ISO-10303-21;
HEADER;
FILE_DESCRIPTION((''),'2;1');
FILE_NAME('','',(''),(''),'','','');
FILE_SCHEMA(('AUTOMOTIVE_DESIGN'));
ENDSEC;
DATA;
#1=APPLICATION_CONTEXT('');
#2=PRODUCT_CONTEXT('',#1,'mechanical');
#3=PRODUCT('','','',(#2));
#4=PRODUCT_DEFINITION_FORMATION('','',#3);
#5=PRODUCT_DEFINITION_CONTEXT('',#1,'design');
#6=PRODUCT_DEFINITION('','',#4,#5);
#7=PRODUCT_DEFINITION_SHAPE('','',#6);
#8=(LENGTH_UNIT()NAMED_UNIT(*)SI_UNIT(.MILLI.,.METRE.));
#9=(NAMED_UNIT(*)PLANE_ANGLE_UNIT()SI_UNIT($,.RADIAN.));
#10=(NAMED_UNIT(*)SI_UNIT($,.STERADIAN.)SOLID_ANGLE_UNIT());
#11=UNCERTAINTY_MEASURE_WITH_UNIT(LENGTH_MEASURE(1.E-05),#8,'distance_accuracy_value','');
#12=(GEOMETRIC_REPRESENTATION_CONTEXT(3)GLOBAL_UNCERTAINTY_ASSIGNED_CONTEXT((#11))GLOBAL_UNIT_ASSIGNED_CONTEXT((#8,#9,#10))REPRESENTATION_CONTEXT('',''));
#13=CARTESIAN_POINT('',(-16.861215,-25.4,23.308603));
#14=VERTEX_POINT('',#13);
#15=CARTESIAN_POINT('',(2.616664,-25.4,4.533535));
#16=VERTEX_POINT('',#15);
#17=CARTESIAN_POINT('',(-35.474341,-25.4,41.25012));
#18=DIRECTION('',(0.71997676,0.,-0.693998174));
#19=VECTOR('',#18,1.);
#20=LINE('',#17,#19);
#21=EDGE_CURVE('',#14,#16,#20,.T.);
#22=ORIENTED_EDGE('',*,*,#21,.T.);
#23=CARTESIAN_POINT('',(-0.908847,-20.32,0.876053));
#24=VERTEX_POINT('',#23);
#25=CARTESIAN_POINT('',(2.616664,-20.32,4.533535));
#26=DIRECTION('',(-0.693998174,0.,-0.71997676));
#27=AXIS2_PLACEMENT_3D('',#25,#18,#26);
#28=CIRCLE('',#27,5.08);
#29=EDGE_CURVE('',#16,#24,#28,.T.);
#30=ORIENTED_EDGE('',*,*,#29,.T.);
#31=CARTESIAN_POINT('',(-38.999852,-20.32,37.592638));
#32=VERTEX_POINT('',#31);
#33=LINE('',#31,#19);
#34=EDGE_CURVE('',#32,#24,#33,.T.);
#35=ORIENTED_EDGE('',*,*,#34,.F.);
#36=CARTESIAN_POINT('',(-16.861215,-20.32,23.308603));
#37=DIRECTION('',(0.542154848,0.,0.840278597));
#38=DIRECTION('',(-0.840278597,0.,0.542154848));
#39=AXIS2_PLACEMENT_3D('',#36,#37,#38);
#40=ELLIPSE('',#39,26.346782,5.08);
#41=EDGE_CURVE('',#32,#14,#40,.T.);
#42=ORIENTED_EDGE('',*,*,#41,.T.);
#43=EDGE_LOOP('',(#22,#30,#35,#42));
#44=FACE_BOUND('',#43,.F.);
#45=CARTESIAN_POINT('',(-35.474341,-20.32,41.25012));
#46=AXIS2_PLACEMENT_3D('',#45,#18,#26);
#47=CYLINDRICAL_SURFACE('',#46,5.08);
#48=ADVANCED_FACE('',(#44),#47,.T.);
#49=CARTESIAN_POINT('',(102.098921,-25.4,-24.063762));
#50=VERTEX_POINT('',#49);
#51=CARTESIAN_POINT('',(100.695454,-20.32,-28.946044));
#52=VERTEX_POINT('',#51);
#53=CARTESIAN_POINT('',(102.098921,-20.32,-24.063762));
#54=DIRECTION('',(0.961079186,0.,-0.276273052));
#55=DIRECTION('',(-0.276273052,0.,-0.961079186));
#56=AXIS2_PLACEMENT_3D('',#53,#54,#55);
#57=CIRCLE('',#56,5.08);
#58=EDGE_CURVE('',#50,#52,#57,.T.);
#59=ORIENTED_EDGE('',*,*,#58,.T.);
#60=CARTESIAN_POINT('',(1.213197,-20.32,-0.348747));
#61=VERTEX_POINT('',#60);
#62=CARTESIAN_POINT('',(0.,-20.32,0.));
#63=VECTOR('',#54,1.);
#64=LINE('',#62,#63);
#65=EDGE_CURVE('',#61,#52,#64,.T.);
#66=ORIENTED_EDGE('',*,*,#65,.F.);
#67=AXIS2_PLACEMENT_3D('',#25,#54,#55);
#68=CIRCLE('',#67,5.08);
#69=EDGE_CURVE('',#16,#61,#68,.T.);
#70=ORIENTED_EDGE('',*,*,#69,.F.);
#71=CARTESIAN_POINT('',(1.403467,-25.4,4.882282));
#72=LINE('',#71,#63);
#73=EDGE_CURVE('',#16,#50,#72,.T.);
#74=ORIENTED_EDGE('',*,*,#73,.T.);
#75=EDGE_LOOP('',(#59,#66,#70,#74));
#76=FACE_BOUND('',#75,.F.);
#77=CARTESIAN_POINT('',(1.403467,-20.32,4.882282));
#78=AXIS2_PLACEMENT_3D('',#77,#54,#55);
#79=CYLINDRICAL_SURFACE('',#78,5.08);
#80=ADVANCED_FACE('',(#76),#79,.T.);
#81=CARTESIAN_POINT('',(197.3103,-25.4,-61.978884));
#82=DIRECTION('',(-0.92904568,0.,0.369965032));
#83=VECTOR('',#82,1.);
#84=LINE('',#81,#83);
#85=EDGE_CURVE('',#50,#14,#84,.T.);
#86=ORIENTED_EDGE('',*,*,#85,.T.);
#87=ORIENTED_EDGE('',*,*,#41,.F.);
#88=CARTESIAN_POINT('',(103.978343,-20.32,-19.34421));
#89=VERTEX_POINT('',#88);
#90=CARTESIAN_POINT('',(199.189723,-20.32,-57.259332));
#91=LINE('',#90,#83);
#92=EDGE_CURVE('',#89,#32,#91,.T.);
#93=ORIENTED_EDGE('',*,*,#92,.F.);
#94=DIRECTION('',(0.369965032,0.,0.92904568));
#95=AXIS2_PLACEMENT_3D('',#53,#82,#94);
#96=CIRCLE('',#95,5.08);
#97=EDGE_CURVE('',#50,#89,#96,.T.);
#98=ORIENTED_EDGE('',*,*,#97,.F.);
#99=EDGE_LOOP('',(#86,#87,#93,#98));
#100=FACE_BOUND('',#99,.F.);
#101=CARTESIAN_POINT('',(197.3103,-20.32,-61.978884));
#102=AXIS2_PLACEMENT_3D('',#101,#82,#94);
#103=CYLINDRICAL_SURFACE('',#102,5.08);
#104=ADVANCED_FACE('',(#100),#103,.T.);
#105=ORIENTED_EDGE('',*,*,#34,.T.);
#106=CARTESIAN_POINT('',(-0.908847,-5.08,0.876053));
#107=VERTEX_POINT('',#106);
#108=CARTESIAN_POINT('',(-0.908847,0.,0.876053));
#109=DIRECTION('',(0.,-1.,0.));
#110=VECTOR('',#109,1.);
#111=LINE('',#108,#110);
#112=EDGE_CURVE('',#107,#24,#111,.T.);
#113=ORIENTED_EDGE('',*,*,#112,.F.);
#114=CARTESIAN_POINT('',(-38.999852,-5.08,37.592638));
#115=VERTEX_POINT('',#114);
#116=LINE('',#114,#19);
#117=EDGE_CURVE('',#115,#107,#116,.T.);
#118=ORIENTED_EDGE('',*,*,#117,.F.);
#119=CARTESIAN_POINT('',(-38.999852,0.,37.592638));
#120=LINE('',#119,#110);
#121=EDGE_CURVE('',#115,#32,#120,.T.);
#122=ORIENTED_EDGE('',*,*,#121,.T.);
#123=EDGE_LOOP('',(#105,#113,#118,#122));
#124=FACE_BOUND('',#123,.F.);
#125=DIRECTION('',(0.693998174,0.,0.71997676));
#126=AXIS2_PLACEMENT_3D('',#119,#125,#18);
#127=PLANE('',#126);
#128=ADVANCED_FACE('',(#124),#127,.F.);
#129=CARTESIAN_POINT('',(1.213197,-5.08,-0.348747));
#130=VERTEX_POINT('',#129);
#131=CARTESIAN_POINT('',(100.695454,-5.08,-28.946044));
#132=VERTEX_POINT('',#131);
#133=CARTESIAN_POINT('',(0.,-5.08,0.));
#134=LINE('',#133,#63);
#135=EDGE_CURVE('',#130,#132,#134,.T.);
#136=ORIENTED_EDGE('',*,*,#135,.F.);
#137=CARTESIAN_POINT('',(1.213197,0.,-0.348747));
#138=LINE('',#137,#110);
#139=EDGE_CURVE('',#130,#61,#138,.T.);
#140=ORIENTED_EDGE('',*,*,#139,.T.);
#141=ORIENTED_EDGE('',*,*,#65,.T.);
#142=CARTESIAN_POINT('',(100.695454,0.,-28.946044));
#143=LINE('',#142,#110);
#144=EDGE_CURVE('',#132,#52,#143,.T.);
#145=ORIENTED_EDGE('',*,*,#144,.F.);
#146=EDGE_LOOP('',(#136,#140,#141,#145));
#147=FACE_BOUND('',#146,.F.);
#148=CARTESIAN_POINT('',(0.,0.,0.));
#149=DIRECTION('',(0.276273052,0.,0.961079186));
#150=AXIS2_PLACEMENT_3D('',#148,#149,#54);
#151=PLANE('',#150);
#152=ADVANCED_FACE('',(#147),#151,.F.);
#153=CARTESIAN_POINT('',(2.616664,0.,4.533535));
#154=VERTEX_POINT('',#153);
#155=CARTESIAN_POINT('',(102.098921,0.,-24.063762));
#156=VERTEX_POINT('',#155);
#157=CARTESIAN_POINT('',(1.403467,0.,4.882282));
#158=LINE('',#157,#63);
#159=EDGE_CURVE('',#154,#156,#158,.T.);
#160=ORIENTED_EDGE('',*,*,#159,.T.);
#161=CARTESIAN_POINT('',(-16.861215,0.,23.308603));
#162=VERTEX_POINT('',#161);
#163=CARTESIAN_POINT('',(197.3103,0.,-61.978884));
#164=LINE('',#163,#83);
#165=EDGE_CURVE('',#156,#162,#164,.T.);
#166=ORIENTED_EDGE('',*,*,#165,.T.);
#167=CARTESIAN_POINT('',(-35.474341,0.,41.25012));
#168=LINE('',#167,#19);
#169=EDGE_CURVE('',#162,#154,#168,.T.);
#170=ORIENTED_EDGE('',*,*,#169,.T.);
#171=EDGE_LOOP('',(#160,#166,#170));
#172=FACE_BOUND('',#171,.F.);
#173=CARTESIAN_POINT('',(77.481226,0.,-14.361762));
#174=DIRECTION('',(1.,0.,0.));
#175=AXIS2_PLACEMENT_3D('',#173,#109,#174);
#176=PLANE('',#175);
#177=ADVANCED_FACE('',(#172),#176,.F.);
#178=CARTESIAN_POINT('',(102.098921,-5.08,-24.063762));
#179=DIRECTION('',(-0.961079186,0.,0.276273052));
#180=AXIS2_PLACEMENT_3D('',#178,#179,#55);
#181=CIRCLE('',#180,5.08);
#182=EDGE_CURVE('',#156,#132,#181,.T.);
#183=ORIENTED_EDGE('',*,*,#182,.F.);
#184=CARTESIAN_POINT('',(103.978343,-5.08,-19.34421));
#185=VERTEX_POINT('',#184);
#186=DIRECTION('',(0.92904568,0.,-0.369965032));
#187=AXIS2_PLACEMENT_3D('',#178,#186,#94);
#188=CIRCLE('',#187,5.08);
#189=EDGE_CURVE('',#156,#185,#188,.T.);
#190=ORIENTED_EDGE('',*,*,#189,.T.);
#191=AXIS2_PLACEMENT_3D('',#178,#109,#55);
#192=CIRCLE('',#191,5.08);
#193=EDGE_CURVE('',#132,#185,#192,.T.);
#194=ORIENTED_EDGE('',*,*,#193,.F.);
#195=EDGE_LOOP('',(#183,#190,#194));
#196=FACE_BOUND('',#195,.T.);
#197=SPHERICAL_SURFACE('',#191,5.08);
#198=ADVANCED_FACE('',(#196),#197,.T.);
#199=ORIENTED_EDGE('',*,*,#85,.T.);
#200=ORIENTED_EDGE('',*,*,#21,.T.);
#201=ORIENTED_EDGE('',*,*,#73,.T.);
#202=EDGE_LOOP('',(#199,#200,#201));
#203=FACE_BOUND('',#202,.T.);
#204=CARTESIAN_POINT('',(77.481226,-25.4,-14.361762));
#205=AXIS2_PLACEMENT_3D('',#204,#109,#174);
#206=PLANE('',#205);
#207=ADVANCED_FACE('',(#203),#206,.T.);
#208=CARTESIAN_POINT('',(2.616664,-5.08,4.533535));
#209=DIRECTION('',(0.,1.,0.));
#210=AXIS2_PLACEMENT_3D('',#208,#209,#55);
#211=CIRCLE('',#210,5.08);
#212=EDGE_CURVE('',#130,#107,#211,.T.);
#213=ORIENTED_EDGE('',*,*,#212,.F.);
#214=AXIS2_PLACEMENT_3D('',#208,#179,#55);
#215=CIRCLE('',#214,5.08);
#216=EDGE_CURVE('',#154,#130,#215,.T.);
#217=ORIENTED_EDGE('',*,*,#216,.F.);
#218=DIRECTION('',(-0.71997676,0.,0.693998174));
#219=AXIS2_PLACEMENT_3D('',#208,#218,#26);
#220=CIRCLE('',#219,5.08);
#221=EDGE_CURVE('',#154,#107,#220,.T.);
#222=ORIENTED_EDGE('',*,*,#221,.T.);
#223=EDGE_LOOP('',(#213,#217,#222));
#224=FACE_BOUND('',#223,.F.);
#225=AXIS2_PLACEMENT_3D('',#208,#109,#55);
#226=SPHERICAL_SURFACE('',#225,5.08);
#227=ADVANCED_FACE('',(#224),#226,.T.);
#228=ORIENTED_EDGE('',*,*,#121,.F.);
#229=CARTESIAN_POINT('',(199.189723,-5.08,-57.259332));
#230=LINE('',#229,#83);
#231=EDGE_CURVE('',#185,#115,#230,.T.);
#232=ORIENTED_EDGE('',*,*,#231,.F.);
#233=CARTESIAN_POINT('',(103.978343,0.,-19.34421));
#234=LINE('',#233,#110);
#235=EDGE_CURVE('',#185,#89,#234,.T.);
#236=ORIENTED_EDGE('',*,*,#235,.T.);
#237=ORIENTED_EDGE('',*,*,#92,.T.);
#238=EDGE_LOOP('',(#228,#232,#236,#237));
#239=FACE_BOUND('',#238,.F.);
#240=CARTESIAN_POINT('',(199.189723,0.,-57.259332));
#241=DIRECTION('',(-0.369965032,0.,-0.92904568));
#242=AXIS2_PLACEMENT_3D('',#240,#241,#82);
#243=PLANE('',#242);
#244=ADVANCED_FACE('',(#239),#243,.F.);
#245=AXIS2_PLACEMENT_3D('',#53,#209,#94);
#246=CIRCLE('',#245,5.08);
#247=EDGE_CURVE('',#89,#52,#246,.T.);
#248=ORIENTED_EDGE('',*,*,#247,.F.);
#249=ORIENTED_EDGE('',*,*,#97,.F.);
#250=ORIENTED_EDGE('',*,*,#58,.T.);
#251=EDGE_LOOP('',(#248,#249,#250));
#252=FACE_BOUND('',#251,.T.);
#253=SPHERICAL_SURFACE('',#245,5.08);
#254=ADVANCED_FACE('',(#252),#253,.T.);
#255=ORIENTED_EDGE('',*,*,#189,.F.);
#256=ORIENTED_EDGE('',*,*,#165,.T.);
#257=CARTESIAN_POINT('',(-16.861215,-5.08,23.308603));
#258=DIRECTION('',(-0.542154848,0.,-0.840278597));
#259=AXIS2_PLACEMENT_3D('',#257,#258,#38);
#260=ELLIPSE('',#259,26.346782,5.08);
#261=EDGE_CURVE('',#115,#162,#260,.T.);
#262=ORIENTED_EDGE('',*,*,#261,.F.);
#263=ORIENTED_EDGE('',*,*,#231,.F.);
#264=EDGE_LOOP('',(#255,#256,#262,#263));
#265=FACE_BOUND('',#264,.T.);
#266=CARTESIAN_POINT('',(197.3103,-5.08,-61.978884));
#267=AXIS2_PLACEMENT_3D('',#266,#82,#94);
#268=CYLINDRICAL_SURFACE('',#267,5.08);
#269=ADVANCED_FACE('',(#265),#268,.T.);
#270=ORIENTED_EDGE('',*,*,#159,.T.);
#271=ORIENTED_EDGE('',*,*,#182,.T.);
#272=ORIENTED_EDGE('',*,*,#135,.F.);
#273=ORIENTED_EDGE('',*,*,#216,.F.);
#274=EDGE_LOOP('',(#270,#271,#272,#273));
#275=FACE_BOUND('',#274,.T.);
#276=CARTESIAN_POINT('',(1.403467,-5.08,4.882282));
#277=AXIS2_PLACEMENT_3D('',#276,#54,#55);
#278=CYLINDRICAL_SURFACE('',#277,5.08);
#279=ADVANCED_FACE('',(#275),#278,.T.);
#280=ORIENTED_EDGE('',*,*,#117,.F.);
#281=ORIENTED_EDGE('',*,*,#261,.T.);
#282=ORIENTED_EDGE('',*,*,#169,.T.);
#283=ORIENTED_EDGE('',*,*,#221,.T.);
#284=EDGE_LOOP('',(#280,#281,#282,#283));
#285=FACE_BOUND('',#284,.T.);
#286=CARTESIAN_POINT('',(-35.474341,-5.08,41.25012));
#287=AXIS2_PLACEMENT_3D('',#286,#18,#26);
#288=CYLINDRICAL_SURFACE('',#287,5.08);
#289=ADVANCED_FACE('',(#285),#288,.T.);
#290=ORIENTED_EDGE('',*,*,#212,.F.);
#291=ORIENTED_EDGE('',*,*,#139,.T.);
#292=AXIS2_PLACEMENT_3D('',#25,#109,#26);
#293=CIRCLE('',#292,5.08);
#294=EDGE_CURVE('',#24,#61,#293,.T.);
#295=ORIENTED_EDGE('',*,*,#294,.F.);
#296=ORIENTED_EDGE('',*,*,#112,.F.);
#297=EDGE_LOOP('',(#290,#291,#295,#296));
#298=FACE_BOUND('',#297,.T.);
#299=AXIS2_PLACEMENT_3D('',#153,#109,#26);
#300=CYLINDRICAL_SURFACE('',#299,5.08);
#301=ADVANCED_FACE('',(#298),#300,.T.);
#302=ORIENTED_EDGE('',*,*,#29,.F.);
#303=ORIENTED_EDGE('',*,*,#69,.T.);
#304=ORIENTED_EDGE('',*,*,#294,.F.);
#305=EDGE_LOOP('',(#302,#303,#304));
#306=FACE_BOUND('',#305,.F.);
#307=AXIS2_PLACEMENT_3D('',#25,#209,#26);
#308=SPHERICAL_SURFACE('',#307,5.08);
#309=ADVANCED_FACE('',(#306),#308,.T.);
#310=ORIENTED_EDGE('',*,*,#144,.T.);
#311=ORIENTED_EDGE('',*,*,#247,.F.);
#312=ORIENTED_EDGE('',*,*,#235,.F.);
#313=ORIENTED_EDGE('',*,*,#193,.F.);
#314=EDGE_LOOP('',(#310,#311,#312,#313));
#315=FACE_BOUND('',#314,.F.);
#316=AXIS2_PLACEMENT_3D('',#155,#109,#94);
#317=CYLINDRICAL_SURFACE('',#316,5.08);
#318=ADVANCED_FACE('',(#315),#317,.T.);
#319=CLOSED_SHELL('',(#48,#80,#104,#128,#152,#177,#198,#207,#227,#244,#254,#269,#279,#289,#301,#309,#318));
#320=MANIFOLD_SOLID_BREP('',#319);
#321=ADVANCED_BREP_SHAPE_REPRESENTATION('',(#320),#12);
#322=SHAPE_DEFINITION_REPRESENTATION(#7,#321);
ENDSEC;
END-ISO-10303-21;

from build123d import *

# Parameters (mm, degrees)
F1_DEPTH = 25.4
F3_R     = 5.08


# Not quite as in the source:
# - a feature of the source that left no trace in its solid (it failed there, or was rolled back) is left out


with BuildPart() as f1:
    # F0 (on Front) → F1 (new body)
    with BuildSketch(Plane.XZ):
        Polygon((199.189722538, -57.2593323886), (-38.9998517931, 37.592638284), (0, 0), align=None)
    extrude(amount=F1_DEPTH)

    # F3
    f3_edges = [f1.edges().sort_by_distance(p)[0] for p in [
        (80.094935, -25.4, -9.833347),
        (-19.499926, -25.4, 18.796319),
        (99.594861, -25.4, -28.629666),
        (0, -12.7, 0),
        (199.189723, -12.7, -57.259332),
        (99.594861, 0, -28.629666),
        (80.094935, 0, -9.833347),
        (-19.499926, 0, 18.796319),
    ]]
    fillet(f3_edges, radius=F3_R)


solid = f1.part
